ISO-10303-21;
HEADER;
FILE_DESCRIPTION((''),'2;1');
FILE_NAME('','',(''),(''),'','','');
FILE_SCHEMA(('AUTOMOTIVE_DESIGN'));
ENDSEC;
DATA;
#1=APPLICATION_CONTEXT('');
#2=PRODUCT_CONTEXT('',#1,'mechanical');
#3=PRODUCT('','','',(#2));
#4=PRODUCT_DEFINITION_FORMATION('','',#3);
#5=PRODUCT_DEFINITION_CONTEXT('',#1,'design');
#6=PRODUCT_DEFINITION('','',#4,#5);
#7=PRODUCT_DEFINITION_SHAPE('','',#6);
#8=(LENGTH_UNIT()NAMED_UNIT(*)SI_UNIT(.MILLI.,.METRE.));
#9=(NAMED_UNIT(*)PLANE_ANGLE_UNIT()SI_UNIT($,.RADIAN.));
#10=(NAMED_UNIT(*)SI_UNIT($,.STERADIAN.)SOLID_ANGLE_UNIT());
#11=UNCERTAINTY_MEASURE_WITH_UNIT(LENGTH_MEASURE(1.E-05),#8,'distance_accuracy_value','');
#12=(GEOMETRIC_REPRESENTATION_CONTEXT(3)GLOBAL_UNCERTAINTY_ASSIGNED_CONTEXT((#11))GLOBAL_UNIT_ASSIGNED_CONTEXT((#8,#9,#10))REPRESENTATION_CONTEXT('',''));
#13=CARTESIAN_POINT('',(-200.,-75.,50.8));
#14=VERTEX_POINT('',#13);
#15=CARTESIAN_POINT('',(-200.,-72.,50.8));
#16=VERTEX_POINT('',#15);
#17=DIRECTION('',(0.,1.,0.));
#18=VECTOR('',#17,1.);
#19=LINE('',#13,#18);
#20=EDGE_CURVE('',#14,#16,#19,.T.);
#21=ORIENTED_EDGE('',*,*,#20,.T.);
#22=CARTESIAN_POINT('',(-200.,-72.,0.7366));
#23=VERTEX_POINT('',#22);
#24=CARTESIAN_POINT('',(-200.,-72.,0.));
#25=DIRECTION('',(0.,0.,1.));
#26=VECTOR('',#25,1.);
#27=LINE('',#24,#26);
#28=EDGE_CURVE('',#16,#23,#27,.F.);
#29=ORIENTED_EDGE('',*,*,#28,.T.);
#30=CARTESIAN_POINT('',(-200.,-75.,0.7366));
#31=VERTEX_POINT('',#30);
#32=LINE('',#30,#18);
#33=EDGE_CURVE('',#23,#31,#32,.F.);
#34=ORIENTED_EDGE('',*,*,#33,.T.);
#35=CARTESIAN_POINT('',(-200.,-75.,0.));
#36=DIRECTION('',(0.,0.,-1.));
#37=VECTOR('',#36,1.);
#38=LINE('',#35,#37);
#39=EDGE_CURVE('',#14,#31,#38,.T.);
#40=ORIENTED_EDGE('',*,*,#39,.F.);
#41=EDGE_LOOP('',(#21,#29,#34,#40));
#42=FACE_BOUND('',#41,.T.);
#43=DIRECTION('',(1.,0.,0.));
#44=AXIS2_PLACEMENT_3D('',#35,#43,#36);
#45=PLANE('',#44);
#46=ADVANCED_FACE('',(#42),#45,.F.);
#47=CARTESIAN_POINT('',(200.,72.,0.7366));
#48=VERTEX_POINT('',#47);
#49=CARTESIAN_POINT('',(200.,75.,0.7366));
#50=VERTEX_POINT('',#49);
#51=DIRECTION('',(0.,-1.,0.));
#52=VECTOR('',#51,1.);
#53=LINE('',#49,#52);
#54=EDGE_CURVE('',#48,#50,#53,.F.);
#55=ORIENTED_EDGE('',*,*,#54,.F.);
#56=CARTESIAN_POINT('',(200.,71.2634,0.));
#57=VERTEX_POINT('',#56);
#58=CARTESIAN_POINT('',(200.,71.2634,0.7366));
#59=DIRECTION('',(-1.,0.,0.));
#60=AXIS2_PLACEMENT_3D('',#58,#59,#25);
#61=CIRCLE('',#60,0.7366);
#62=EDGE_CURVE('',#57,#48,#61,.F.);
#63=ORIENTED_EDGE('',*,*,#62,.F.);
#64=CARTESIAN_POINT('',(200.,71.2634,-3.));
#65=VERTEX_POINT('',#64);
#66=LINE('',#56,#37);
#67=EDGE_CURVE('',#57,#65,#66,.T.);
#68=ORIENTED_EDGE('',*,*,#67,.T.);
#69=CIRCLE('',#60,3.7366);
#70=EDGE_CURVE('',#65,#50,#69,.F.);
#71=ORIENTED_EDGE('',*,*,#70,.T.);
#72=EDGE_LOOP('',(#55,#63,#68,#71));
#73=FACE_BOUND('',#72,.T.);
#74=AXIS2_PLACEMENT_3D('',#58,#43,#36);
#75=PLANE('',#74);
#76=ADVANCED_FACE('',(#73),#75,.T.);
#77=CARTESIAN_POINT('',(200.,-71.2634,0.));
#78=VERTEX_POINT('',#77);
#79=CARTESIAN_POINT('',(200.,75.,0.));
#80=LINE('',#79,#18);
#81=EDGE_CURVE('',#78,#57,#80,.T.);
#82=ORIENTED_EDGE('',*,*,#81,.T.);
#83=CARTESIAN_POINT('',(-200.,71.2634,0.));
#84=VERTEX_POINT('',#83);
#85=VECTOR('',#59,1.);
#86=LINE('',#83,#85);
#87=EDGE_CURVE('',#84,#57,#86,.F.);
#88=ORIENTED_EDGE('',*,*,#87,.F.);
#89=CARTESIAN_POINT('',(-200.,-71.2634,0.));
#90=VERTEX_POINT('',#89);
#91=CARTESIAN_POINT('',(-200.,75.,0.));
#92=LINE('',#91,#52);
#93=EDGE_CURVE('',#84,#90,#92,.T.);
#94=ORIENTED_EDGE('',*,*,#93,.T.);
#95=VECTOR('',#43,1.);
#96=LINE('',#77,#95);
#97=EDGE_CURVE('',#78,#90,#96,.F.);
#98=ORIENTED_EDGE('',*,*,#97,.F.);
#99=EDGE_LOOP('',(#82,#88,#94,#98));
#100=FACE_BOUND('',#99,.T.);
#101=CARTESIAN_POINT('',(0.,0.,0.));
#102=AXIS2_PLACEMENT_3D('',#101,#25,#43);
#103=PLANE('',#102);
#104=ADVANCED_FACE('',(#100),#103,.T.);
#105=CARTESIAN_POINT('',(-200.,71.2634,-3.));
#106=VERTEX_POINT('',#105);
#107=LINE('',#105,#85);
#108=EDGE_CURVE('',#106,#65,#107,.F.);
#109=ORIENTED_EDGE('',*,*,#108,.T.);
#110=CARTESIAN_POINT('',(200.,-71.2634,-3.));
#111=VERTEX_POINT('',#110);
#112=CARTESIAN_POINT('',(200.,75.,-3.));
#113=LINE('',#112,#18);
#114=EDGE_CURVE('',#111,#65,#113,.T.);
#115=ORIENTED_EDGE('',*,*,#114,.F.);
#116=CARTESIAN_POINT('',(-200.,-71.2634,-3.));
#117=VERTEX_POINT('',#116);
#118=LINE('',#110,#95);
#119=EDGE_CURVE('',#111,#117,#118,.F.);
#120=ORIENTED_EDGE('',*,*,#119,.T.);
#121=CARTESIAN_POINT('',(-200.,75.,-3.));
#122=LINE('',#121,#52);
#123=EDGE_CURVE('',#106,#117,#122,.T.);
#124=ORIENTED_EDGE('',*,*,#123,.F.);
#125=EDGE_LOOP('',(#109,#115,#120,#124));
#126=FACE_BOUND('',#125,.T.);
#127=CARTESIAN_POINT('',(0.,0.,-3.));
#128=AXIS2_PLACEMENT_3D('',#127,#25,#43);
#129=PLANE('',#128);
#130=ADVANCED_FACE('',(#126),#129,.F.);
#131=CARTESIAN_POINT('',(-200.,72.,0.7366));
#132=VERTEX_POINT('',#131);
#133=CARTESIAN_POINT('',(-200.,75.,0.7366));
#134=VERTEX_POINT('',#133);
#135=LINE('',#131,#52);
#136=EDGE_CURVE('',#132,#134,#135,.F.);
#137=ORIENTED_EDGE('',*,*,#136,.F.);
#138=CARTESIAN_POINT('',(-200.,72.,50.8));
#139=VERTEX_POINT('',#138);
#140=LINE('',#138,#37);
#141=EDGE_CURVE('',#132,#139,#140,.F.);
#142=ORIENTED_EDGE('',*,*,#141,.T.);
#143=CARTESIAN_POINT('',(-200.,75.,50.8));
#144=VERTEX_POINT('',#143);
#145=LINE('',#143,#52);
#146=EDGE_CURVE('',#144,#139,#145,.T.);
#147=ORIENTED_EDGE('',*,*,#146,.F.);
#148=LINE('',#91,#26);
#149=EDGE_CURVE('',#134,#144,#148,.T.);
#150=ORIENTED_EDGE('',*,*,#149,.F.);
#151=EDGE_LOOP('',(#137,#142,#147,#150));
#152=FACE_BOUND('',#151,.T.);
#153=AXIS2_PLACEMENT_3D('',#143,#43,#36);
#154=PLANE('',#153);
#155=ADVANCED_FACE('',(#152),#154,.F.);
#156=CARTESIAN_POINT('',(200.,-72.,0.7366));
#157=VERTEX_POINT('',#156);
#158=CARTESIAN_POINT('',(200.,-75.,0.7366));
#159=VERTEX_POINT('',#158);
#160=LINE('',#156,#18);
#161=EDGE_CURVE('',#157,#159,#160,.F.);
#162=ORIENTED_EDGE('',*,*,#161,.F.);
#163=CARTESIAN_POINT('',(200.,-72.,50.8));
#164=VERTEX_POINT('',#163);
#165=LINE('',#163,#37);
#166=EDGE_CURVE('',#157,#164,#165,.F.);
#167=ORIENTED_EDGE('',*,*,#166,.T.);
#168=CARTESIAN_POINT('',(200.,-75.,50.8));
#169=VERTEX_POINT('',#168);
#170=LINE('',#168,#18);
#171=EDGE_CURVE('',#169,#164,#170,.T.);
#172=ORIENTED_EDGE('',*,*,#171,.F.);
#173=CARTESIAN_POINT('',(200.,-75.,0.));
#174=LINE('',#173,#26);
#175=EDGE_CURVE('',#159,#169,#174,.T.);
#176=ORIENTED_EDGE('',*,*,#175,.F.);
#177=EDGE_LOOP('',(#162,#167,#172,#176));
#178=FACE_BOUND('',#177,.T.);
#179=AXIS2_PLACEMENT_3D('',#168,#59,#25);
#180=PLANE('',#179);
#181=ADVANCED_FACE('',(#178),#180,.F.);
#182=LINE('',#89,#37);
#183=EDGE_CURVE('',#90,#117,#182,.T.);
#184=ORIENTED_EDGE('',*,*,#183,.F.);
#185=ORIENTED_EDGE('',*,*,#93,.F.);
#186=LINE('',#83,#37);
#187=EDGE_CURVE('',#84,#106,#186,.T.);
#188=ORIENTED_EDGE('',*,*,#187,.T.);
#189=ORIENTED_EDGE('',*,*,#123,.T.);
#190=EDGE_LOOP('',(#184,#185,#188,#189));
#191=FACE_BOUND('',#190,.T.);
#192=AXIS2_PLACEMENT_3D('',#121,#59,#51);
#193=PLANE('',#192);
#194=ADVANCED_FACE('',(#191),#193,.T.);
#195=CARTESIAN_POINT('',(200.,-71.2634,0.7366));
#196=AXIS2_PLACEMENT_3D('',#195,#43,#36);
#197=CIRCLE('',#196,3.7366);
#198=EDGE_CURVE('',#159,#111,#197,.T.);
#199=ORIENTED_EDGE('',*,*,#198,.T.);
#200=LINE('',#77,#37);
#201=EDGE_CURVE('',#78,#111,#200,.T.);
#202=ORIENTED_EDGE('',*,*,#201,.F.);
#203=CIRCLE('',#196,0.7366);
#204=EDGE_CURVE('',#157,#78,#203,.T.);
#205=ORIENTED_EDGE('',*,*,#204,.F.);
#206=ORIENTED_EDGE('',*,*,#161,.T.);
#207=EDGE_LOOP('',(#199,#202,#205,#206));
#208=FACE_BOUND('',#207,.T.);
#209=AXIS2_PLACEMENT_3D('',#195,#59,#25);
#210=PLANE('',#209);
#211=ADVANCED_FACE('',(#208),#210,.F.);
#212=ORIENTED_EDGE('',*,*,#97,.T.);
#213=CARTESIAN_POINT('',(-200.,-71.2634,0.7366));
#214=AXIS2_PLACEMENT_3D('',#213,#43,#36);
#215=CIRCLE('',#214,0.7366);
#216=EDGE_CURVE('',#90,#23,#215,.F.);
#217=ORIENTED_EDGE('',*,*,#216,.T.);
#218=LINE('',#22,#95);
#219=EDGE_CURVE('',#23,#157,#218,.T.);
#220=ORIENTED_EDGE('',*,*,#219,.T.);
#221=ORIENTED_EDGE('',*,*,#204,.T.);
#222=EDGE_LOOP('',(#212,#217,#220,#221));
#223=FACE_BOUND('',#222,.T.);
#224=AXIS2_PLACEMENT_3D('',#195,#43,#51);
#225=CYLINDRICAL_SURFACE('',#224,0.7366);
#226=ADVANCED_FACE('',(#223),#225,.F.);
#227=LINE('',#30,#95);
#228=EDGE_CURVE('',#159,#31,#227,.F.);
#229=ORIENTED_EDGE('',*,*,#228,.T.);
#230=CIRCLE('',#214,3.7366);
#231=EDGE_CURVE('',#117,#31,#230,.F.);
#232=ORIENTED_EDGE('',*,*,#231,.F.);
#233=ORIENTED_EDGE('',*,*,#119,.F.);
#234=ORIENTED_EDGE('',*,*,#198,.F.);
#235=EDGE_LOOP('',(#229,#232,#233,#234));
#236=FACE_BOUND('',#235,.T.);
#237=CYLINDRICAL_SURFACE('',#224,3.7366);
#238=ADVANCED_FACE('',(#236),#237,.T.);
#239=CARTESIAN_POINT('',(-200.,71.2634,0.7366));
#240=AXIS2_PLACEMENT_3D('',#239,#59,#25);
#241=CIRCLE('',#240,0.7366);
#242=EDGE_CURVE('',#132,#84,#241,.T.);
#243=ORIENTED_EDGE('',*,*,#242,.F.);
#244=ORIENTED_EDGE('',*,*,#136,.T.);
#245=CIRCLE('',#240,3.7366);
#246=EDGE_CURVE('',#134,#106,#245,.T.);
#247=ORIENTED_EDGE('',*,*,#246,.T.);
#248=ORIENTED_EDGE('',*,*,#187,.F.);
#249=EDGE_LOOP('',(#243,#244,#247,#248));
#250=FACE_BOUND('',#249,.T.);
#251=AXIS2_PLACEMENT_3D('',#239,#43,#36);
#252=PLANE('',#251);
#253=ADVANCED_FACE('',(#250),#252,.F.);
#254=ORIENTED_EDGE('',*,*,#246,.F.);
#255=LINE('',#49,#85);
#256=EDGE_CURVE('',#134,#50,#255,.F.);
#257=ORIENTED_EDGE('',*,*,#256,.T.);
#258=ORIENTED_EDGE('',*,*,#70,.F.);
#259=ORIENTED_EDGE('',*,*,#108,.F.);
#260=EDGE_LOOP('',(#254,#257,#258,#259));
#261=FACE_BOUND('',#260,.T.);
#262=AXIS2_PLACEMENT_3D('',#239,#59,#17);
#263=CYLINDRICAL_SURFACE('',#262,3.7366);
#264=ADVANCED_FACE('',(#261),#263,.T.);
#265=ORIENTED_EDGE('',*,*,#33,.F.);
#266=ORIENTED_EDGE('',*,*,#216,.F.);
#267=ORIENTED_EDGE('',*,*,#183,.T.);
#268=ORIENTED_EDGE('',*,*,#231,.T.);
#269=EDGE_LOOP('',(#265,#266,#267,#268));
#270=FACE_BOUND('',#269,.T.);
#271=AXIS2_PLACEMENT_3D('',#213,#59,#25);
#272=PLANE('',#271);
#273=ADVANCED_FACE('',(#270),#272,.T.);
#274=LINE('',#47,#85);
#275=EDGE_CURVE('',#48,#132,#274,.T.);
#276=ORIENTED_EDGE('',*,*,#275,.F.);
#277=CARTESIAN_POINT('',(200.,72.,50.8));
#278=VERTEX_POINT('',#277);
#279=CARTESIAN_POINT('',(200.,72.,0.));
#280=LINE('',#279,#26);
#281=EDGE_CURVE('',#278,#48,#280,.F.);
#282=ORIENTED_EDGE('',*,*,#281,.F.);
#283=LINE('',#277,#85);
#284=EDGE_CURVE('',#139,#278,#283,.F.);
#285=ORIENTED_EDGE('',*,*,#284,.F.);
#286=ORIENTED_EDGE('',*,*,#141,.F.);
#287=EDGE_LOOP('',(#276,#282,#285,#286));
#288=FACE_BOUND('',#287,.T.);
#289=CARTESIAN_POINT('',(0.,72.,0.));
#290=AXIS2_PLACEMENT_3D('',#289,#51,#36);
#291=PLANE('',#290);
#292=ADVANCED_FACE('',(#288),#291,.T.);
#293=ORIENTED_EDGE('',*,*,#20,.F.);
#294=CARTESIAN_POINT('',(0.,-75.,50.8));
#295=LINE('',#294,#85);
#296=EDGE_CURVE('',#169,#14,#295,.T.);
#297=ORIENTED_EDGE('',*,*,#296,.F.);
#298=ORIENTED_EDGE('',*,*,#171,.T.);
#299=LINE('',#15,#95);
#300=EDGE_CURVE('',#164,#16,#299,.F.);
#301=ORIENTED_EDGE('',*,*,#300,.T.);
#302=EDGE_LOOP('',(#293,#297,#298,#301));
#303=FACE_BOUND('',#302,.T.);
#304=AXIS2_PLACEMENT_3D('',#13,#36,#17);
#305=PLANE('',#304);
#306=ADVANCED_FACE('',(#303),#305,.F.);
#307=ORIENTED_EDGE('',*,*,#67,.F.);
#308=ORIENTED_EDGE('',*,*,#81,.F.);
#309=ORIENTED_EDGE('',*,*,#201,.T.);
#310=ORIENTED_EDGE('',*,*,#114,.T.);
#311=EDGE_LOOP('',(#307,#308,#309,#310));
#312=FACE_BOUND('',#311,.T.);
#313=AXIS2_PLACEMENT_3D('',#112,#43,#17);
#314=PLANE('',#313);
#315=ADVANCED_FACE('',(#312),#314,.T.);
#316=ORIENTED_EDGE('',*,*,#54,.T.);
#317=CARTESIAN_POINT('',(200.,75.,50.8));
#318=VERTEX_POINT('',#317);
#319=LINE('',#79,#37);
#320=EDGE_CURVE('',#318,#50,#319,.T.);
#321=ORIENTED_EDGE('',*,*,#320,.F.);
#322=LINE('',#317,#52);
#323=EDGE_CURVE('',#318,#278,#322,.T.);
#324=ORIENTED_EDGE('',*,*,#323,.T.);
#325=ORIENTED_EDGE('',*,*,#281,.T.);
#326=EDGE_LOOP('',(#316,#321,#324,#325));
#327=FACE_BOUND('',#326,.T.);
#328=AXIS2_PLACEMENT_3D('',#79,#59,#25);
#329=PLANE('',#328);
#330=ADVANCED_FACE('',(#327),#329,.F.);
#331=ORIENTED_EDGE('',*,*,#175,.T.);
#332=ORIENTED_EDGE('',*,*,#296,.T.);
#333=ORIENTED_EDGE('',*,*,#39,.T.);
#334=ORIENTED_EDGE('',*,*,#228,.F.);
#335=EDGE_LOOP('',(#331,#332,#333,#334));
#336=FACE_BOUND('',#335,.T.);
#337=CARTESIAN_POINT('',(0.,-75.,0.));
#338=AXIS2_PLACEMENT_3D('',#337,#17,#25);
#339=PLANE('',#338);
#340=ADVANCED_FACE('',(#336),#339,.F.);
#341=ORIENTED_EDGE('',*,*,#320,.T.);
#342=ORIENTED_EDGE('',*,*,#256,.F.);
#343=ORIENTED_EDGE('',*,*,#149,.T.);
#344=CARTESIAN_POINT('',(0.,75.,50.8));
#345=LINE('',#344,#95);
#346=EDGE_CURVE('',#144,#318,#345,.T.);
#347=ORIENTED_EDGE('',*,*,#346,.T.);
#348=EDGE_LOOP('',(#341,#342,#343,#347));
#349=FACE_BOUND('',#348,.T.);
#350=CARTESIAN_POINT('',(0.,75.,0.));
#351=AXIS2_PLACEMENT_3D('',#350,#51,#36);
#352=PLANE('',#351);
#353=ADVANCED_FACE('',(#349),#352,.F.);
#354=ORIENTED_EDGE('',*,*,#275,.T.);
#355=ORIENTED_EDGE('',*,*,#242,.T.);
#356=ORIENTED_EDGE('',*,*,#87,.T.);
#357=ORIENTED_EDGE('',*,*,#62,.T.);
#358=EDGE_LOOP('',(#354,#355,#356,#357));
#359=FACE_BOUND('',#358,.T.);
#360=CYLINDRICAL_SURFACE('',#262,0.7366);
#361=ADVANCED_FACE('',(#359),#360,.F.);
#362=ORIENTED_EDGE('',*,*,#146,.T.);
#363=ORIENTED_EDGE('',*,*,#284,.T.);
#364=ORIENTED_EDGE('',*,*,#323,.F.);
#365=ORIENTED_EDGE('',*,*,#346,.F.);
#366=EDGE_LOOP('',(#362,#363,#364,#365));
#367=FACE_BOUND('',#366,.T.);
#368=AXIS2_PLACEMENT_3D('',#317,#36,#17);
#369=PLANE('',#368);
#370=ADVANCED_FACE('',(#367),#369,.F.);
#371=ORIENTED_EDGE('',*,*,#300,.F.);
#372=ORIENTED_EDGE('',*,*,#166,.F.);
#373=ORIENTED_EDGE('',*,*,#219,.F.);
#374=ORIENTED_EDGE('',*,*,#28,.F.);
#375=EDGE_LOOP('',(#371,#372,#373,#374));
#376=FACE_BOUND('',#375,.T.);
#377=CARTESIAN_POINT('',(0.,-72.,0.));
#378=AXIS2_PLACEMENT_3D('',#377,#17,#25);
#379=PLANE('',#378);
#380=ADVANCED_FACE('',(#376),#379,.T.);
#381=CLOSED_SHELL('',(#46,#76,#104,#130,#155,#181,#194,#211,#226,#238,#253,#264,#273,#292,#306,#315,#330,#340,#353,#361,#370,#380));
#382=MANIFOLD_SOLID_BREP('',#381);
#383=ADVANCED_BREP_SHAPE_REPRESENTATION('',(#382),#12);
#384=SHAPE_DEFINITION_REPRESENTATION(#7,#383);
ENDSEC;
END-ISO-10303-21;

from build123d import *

# Parameters (mm, degrees)
SKETCH1_W                    = 400
SKETCH1_H                    = 150
BASE_FLANGE1_DEPTH           = 3
EDGE_FLANGE1_STRIP_W         = 13.4732
EDGE_FLANGE1_STRIP_H         = 3
EDGE_FLANGE1_STRIP_CUT_DEPTH = 400
EDGE_FLANGE1_DEPTH           = 400
EDGE_FLANGE2_STRIP_W         = 13.4732
EDGE_FLANGE2_STRIP_H         = 3
EDGE_FLANGE2_STRIP_CUT_DEPTH = 400
EDGE_FLANGE2_DEPTH           = 400


# Sheet-metal steps are written as plain solids
with BuildPart() as part:
    # Sketch1 → Base-Flange1 (new body)
    with BuildSketch(Plane.XY):
        Rectangle(SKETCH1_W, SKETCH1_H)
    extrude(amount=-BASE_FLANGE1_DEPTH)

    # Edge-Flange1 strip (across the edge) → Edge-Flange1 strip cut (cut)
    with BuildSketch(Plane(origin=(-200, -75, 0), x_dir=(0, 1, 0), z_dir=(1, 0, 0))):
        with Locations((-3, -1.5)):
            Rectangle(EDGE_FLANGE1_STRIP_W, EDGE_FLANGE1_STRIP_H)
    extrude(amount=EDGE_FLANGE1_STRIP_CUT_DEPTH, mode=Mode.SUBTRACT)

    # Edge-Flange1 section (across the edge) → Edge-Flange1 (add)
    with BuildSketch(Plane(origin=(-200, -75, 0), x_dir=(0, 1, 0), z_dir=(1, 0, 0))):
        with BuildLine():
            Line((0, 0.7366), (0, 50.8))
            Line((0, 50.8), (3, 50.8))
            Line((3, 50.8), (3, 0.7366))
            ThreePointArc((3, 0.7366), (3.215745145, 0.215745145), (3.7366, 0))
            Line((3.7366, 0), (3.7366, -3))
            ThreePointArc((3.7366, -3), (1.094424801, -1.905575199), (0, 0.7366))
        make_face()
    extrude(amount=EDGE_FLANGE1_DEPTH)

    # Edge-Flange2 strip (across the edge) → Edge-Flange2 strip cut (cut)
    with BuildSketch(Plane(origin=(200, 75, 0), x_dir=(0, -1, 0), z_dir=(-1, 0, 0))):
        with Locations((-3, -1.5)):
            Rectangle(EDGE_FLANGE2_STRIP_W, EDGE_FLANGE2_STRIP_H)
    extrude(amount=EDGE_FLANGE2_STRIP_CUT_DEPTH, mode=Mode.SUBTRACT)

    # Edge-Flange2 section (across the edge) → Edge-Flange2 (add)
    with BuildSketch(Plane(origin=(200, 75, 0), x_dir=(0, -1, 0), z_dir=(-1, 0, 0))):
        with BuildLine():
            Line((0, 0.7366), (0, 50.8))
            Line((0, 50.8), (3, 50.8))
            Line((3, 50.8), (3, 0.7366))
            ThreePointArc((3, 0.7366), (3.215745145, 0.215745145), (3.7366, 0))
            Line((3.7366, 0), (3.7366, -3))
            ThreePointArc((3.7366, -3), (1.094424801, -1.905575199), (0, 0.7366))
        make_face()
    extrude(amount=EDGE_FLANGE2_DEPTH)


solid = part.part
